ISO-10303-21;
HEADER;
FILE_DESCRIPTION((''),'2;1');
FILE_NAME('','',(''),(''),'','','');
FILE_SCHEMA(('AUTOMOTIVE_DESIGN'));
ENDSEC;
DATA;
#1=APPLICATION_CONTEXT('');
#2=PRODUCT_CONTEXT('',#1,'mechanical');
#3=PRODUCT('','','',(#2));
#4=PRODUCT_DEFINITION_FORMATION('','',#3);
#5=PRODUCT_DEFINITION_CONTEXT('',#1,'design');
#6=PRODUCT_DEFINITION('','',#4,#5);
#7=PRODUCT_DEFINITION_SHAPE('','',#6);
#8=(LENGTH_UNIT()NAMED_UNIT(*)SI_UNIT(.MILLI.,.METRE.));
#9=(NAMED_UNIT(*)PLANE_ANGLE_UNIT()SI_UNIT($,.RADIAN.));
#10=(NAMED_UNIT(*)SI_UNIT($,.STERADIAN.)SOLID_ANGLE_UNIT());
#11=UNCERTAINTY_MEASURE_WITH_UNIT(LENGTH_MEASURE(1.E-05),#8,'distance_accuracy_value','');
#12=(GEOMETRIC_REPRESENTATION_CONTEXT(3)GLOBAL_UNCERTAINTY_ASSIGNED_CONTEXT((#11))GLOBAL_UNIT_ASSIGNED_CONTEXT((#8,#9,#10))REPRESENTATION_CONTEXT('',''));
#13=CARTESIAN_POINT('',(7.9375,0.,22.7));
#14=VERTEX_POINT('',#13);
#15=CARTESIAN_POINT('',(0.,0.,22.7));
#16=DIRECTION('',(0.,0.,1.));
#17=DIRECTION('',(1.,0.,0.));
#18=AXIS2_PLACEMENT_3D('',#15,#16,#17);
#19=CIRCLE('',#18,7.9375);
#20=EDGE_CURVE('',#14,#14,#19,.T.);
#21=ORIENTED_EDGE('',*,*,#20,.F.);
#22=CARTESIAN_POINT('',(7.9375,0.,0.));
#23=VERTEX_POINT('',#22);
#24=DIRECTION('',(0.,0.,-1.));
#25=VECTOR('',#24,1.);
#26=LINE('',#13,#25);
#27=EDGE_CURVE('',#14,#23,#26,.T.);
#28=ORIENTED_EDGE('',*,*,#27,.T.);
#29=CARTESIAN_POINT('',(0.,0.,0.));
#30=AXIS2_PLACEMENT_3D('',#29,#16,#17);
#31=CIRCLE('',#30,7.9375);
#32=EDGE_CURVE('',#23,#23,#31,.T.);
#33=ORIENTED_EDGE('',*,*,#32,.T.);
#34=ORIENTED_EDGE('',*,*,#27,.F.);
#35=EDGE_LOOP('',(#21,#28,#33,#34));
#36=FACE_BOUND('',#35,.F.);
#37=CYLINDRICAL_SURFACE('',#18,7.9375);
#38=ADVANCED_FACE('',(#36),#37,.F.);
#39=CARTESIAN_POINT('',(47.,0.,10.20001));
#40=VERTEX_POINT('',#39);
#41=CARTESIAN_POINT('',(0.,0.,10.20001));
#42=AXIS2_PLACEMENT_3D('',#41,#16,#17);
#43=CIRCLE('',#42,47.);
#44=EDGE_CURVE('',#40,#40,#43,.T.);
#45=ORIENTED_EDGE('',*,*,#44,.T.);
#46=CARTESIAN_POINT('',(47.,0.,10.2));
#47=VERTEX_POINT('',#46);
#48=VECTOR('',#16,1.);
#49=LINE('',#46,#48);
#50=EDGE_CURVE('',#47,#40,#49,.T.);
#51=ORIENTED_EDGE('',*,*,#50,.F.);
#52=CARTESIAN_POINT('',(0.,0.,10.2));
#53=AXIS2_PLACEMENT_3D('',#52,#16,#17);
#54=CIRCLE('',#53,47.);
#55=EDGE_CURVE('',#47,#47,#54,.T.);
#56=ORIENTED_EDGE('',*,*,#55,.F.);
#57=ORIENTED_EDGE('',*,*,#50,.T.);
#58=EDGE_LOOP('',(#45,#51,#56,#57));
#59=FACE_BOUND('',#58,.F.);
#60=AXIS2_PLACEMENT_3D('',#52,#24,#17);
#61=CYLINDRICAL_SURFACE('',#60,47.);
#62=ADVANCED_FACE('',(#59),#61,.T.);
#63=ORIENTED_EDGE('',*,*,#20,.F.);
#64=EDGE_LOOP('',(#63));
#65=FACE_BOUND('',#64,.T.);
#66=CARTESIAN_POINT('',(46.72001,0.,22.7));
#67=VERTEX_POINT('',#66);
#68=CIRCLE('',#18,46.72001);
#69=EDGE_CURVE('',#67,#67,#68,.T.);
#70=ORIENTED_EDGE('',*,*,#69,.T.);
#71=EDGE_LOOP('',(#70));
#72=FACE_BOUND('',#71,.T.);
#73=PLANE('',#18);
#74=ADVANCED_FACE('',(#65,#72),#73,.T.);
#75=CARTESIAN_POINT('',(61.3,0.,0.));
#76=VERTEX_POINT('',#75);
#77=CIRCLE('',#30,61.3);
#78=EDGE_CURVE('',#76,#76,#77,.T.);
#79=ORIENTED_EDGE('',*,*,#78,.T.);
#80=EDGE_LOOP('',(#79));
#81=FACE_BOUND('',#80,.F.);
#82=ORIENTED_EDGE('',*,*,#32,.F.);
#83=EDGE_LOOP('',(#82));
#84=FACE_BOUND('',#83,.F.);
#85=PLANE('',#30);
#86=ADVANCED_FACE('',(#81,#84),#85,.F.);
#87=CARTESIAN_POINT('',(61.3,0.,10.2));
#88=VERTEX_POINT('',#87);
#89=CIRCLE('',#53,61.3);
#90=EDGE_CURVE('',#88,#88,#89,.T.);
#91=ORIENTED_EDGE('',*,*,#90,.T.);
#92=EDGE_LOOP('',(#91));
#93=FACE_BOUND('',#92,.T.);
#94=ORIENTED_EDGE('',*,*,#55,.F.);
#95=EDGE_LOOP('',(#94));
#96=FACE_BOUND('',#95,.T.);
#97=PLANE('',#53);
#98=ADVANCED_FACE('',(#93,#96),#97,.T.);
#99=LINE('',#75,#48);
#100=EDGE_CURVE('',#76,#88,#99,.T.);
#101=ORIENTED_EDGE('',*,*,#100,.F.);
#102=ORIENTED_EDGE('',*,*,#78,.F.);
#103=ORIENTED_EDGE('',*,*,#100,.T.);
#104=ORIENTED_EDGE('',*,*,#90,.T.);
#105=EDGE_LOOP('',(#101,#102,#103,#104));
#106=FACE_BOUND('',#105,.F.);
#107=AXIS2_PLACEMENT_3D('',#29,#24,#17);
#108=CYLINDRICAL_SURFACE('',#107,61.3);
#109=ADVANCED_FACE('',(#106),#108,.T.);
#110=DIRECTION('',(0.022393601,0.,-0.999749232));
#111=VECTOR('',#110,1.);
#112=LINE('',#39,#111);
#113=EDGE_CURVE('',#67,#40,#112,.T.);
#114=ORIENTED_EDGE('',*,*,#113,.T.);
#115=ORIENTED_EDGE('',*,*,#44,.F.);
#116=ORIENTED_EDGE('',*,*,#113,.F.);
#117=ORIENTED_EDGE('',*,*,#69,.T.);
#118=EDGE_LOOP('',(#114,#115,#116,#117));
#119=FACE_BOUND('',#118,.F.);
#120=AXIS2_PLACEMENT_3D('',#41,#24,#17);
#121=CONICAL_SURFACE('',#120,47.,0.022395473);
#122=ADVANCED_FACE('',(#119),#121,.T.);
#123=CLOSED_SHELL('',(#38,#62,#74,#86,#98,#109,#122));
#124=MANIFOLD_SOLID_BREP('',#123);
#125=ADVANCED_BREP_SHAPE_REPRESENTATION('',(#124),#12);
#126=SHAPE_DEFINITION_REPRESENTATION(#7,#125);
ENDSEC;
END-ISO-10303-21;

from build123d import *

# Parameters (mm, degrees)
F0_R     = 61.3
F1_DEPTH = 10.2
F2_R     = 47
F3_DEPTH = 12.5
F4_SIZE2 = 12.49999
F4_SIZE  = 0.27999
F5_R     = 7.9375
F6_DEPTH = 22.701


# Not quite as in the source:
# - a fillet or chamfer is up to 0.001 mm smaller than in the source, because OpenCascade refuses the exact size


with BuildPart() as f1:
    # F0 (on Top) → F1 (new body)
    with BuildSketch(Plane.XY):
        Circle(F0_R)
    extrude(amount=F1_DEPTH)

    # F2 (on face) → F3 (join)
    with BuildSketch(Plane.XY.offset(10.2)):
        Circle(F2_R)
    extrude(amount=F3_DEPTH)

    # F4 (size 0.28 and 12.5 in the source; OpenCascade refuses exactly that, so slightly less here)
    f4_edges = [f1.edges().sort_by_distance(p)[0] for p in [
        (-47, 0, 22.7),
    ]]
    f4_side = f1.faces().sort_by_distance((0, 0, 22.7))[0]
    chamfer(f4_edges, length=F4_SIZE, length2=F4_SIZE2, reference=f4_side)

    # F5 (on face) → F6 (cut, through all)
    with BuildSketch(Plane.XY.offset(22.7)):
        Circle(F5_R)
    extrude(amount=-F6_DEPTH, mode=Mode.SUBTRACT)


solid = f1.part
